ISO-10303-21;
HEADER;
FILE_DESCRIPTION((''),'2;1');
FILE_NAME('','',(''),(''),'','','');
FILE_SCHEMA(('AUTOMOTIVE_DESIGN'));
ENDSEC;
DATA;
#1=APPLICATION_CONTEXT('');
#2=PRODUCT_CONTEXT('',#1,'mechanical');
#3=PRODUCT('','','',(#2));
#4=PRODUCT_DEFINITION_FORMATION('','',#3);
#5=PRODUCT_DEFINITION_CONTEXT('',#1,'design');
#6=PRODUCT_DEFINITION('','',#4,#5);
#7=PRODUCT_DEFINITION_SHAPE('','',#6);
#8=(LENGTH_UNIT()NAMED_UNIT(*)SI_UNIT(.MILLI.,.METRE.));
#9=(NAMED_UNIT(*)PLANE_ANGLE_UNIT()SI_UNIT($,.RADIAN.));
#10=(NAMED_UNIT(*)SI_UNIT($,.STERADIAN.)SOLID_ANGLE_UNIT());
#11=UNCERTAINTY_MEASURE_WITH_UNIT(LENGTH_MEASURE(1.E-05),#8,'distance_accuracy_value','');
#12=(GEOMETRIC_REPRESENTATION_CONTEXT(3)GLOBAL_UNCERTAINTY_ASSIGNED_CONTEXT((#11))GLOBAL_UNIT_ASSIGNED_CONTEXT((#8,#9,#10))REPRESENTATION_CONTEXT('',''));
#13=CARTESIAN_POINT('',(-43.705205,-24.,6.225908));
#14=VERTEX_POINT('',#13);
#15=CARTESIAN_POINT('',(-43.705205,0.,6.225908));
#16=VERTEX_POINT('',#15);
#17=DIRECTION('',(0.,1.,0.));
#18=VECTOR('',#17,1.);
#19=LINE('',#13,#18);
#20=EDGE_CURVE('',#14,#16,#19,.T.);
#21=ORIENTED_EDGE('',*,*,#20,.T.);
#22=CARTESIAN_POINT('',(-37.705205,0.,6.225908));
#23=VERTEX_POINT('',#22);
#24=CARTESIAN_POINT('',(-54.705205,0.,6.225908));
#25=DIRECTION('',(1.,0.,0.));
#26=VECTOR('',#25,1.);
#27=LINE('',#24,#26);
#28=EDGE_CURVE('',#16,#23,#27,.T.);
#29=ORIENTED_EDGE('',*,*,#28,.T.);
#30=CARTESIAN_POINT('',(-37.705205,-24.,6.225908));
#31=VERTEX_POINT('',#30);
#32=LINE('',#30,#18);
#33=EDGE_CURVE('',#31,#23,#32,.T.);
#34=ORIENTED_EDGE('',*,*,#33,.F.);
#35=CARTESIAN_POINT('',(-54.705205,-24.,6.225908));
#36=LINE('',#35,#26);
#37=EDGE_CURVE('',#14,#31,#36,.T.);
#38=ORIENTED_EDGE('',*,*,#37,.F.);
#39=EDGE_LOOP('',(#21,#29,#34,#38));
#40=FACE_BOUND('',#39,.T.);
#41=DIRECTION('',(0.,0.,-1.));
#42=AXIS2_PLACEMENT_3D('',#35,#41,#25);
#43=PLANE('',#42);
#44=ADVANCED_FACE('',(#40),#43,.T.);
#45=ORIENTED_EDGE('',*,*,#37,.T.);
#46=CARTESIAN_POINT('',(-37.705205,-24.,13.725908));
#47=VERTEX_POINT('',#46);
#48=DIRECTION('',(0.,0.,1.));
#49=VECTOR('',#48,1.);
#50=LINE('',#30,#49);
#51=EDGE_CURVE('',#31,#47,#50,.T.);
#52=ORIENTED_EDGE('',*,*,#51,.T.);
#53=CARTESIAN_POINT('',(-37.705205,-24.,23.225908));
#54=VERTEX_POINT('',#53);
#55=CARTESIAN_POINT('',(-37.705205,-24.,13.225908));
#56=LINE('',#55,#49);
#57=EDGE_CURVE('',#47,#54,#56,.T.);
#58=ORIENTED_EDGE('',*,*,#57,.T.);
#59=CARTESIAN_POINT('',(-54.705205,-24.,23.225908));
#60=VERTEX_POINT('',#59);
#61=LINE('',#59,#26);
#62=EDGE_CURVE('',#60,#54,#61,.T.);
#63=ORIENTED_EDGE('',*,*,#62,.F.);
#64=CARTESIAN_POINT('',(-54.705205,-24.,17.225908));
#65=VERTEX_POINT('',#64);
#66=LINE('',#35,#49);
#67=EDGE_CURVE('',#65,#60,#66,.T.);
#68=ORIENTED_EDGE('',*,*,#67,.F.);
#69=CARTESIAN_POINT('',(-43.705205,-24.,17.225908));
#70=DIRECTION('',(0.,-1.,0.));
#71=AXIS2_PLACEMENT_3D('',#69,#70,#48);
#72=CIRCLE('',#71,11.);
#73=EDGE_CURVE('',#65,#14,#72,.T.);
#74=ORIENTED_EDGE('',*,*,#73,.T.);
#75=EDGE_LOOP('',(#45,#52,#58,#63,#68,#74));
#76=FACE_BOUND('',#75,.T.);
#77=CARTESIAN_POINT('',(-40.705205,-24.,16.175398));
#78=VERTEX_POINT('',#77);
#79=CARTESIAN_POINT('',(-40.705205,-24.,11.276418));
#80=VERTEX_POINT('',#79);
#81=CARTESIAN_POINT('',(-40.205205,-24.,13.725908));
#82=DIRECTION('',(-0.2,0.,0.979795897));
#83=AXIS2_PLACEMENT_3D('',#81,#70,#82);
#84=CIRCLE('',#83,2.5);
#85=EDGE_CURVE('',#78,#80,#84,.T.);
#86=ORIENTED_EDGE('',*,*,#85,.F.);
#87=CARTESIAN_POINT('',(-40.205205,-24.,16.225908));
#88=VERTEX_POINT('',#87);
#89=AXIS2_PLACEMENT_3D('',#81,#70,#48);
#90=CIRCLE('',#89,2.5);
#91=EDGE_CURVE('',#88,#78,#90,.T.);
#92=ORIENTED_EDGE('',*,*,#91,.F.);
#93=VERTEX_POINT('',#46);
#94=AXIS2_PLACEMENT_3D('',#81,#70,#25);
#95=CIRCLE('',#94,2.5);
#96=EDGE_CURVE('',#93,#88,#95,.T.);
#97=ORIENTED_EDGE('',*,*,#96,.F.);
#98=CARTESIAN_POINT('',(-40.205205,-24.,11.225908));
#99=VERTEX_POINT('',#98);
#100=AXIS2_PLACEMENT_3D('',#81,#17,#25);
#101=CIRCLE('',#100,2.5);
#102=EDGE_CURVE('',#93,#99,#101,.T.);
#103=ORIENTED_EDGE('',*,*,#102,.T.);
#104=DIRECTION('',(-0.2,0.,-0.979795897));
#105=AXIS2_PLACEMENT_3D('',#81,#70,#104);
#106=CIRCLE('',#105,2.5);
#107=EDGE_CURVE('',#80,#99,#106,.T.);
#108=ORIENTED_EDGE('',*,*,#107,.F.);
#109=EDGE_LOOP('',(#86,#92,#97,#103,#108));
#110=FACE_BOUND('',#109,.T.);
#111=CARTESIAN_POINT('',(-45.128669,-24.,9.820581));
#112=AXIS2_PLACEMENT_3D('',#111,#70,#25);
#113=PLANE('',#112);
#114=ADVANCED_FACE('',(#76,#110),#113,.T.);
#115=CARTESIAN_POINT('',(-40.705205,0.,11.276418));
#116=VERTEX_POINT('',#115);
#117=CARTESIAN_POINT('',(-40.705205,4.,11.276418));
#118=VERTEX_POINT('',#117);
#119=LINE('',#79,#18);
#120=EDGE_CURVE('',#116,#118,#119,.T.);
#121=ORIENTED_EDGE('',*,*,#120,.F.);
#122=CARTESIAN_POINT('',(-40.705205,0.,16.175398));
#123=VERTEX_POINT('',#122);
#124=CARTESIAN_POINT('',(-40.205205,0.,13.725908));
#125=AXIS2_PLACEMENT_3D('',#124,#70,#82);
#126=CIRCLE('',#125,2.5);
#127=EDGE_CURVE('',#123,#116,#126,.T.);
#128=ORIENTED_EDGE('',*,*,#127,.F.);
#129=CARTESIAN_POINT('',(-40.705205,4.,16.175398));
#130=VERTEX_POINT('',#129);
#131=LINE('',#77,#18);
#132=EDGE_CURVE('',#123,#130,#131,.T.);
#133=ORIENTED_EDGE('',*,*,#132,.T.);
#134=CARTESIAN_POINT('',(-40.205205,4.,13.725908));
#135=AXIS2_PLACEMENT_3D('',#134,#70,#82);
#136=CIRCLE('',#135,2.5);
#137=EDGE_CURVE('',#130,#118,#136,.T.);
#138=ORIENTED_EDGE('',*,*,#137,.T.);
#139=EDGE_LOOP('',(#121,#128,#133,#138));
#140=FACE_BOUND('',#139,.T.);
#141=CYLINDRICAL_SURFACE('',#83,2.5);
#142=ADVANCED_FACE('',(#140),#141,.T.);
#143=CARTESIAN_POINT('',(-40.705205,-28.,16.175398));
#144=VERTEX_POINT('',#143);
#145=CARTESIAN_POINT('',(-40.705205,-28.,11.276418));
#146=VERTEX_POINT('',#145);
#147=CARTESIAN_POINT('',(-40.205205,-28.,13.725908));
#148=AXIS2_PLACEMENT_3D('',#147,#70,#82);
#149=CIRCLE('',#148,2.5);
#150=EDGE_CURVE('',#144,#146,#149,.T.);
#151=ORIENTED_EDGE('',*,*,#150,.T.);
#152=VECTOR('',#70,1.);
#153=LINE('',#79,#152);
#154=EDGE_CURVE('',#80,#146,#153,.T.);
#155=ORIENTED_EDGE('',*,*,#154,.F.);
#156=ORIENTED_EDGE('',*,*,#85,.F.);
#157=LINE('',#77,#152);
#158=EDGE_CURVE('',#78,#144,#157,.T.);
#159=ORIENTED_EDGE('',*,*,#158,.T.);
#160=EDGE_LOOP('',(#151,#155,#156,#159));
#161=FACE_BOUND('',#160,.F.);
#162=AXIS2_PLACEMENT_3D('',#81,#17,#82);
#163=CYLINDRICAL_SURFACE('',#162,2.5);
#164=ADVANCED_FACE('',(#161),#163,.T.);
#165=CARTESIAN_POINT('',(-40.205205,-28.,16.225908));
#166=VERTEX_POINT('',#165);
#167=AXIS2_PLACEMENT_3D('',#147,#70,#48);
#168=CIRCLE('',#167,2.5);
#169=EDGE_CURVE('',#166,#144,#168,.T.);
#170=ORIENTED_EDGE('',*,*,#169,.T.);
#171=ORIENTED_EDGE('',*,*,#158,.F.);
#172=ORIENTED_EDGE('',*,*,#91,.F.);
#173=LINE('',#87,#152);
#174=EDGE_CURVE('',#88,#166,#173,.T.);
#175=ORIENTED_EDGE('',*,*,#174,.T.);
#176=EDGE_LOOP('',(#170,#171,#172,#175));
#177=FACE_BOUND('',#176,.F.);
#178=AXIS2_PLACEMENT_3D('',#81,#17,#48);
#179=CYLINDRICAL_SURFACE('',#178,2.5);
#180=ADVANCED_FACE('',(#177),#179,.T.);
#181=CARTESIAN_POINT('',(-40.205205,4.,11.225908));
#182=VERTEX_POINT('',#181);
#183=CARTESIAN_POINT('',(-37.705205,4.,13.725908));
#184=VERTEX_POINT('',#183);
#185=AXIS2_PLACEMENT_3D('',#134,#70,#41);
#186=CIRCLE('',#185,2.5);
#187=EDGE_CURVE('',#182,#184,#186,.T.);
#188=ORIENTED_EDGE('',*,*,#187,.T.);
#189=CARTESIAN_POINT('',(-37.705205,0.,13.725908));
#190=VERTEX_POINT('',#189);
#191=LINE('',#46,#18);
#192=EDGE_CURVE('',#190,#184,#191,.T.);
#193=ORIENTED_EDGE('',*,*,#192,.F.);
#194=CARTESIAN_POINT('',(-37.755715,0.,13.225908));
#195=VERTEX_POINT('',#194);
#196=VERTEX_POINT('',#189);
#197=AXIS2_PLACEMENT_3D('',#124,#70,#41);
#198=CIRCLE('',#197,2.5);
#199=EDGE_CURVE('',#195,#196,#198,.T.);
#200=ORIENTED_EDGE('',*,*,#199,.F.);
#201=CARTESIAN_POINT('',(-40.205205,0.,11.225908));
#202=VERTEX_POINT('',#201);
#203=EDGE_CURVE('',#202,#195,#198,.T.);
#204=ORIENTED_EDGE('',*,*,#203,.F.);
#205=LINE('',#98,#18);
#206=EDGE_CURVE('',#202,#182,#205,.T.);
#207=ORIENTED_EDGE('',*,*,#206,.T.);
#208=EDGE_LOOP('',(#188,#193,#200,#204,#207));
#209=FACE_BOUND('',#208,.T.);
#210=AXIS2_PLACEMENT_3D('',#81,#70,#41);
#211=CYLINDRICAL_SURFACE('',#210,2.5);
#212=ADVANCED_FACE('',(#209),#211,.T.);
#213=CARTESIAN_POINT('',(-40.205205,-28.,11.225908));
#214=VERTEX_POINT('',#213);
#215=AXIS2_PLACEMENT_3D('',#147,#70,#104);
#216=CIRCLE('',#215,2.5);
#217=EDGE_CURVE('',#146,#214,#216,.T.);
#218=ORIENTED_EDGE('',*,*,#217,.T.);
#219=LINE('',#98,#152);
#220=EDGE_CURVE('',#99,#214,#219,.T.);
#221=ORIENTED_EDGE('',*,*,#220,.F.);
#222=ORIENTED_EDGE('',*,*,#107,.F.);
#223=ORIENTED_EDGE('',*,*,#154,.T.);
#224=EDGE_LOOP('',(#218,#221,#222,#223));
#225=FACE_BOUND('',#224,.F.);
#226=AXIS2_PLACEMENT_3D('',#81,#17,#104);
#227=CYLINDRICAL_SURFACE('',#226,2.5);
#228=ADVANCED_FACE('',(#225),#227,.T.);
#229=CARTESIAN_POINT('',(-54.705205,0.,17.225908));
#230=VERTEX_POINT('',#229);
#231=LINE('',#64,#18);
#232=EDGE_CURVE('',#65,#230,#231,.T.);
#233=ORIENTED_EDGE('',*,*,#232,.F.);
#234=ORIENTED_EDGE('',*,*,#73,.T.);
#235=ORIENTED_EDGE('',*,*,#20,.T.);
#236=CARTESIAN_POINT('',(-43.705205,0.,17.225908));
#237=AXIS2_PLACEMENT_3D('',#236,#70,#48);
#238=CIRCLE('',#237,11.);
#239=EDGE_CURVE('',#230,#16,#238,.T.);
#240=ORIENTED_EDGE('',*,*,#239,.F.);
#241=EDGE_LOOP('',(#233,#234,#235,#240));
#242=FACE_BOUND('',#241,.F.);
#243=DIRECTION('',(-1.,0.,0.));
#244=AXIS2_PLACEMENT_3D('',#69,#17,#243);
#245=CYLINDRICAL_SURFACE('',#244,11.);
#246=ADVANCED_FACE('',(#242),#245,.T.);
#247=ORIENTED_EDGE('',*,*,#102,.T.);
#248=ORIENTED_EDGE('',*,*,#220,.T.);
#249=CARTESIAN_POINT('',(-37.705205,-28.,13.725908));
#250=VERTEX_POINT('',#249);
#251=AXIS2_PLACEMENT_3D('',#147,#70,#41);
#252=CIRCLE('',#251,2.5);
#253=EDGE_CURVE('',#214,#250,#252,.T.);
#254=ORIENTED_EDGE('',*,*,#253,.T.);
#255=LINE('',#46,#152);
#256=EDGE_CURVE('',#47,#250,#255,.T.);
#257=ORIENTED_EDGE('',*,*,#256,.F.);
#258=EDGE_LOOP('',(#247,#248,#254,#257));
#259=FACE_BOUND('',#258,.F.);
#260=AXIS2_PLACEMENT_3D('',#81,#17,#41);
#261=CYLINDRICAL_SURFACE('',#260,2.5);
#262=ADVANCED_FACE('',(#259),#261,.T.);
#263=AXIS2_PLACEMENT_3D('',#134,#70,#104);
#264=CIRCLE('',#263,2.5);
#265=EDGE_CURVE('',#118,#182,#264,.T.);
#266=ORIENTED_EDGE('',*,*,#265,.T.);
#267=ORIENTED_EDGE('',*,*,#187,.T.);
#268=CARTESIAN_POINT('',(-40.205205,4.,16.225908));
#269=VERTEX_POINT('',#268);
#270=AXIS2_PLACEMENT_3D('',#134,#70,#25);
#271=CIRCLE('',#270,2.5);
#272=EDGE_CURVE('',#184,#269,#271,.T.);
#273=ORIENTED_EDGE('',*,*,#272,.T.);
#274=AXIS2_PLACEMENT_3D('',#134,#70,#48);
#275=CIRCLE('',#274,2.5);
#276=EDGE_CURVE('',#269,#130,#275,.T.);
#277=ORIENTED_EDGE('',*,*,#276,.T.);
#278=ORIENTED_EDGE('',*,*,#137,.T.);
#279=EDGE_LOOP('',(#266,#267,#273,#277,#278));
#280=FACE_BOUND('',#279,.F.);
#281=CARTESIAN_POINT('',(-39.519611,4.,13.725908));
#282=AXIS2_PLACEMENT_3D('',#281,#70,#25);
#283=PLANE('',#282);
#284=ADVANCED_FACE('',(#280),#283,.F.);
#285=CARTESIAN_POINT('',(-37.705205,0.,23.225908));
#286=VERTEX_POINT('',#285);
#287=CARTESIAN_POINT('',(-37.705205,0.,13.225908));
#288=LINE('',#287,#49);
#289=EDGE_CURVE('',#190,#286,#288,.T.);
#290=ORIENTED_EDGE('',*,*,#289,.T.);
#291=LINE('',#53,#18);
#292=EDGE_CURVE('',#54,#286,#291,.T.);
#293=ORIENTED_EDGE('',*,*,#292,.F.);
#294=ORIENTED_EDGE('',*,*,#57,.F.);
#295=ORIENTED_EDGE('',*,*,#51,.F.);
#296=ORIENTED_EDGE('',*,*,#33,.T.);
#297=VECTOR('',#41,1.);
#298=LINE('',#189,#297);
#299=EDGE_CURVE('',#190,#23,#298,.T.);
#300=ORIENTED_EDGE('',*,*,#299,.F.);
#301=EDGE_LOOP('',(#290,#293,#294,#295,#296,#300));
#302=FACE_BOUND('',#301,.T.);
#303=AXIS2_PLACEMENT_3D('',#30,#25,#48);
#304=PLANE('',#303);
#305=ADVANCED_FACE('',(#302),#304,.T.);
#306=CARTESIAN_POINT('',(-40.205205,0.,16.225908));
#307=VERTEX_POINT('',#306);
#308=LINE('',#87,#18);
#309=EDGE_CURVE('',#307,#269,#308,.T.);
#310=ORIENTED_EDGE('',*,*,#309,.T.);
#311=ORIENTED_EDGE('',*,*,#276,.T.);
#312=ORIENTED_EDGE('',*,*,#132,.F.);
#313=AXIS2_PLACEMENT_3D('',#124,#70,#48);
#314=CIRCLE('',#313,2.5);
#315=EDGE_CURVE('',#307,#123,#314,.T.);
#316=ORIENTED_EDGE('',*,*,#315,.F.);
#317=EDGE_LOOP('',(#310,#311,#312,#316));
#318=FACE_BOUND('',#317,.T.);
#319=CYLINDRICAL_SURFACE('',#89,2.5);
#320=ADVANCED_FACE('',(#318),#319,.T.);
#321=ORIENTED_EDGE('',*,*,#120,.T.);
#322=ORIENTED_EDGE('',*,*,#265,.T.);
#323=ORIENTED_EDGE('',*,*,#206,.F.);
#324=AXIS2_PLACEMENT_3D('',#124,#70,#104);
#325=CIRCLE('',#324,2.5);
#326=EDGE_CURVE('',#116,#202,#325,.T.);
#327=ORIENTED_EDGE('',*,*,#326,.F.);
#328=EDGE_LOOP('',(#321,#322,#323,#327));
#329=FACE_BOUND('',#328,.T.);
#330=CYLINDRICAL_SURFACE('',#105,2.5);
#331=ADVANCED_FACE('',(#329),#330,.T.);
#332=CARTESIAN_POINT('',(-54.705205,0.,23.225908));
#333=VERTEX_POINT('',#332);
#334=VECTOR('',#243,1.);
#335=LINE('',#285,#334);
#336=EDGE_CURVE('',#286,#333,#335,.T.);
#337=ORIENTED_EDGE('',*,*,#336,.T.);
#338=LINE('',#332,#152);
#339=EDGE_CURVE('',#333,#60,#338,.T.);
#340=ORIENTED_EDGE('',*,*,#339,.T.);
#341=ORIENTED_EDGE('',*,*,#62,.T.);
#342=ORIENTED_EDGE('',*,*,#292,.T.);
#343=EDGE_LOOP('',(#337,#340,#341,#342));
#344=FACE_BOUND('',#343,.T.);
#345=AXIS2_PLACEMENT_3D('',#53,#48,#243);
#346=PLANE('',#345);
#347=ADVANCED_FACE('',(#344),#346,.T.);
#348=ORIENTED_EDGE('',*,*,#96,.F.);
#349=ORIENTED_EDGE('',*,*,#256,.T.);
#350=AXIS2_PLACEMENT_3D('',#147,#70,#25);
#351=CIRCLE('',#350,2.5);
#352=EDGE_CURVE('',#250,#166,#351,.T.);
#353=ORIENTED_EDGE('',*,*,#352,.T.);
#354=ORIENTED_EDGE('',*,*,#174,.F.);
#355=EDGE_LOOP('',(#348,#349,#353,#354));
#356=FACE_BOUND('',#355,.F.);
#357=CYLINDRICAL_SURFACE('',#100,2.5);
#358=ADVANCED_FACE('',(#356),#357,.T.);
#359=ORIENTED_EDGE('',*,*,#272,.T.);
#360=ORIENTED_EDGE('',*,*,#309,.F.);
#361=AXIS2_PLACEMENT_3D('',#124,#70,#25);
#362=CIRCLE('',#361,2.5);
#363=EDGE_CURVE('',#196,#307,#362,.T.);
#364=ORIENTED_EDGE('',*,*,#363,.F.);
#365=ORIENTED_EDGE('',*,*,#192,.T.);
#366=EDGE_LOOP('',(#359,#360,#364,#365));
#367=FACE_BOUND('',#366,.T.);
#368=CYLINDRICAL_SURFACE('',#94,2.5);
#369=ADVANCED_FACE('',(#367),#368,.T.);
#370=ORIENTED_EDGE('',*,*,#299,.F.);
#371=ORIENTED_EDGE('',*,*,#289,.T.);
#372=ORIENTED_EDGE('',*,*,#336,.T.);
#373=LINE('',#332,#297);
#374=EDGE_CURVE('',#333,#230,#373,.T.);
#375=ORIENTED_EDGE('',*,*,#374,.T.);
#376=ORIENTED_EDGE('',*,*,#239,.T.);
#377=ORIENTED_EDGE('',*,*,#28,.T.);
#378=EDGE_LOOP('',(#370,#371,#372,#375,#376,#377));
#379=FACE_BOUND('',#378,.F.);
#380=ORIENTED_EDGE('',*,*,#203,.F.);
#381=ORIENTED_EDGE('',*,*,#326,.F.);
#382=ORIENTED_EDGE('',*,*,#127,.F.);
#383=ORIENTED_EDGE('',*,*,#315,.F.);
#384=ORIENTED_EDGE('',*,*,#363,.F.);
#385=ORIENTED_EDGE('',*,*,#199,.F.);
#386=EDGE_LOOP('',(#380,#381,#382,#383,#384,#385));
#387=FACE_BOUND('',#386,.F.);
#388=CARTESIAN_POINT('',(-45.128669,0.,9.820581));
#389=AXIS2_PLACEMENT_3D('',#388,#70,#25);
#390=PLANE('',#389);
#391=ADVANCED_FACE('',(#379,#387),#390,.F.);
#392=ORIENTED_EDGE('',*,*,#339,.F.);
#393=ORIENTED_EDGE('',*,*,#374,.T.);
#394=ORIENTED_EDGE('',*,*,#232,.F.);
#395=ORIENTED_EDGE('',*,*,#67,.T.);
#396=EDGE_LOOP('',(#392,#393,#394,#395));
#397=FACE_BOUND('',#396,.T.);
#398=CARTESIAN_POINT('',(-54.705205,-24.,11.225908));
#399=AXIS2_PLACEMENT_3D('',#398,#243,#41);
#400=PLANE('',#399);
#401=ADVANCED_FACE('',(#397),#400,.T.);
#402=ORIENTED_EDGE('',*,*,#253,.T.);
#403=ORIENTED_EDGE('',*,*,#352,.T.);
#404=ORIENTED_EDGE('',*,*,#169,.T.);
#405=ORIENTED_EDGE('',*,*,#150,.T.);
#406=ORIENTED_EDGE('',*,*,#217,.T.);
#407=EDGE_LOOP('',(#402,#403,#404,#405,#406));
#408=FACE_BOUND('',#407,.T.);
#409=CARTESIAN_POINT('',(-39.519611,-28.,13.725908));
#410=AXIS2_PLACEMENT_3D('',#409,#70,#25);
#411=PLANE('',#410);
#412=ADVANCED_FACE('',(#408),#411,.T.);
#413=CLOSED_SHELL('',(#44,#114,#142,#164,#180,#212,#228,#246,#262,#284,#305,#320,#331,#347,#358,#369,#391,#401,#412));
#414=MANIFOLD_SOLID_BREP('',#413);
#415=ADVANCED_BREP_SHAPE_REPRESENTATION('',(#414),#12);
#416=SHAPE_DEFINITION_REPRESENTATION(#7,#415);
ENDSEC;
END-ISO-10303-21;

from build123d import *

# Parameters (mm, degrees)
F0_W     = 14
F0_H     = 12
F1_DEPTH = 24
F3_DEPTH = 28
F4_DEPTH = 4
F6_DEPTH = 24
F8_DEPTH = 24
F9_R     = 11


with BuildPart() as f1:
    # F0 (on Front) → F1 (new body)
    with BuildSketch(Plane.XZ):
        with Locations((-47.7052051574, 17.2259079414)):
            Rectangle(F0_W, F0_H)
    extrude(amount=F1_DEPTH)

    # F2 (on face) → F3 (join)
    with BuildSketch(Plane.XZ.offset(24)):
        with BuildLine():
            ThreePointArc((-40.7052051574, 11.2764181987), (-40.4564775624, 11.2385675589), (-40.2052051574, 11.2259079414))
            ThreePointArc((-40.2052051574, 11.2259079414), (-38.4374382044, 11.9581409885), (-37.7052051574, 13.7259079414))
            ThreePointArc((-37.7052051574, 13.7259079414), (-38.4374382044, 15.4936748944), (-40.2052051574, 16.2259079414))
            ThreePointArc((-40.2052051574, 16.2259079414), (-40.4564775624, 16.2132483239), (-40.7052051574, 16.1753976842))
            Line((-40.7052051574, 16.1753976842), (-40.7052051574, 11.2764181987))
        make_face()
        with BuildLine():
            ThreePointArc((-40.7052051574, 16.1753976842), (-42.7052051574, 13.7259079414), (-40.7052051574, 11.2764181987))
            Line((-40.7052051574, 11.2764181987), (-40.7052051574, 16.1753976842))
        make_face()
    extrude(amount=-F3_DEPTH)

    # F2 (on face) → F4 (join)
    with BuildSketch(Plane.XZ.offset(24)):
        with BuildLine():
            ThreePointArc((-40.7052051574, 11.2764181987), (-40.4564775624, 11.2385675589), (-40.2052051574, 11.2259079414))
            ThreePointArc((-40.2052051574, 11.2259079414), (-38.4374382044, 11.9581409885), (-37.7052051574, 13.7259079414))
            ThreePointArc((-37.7052051574, 13.7259079414), (-38.4374382044, 15.4936748944), (-40.2052051574, 16.2259079414))
            ThreePointArc((-40.2052051574, 16.2259079414), (-40.4564775624, 16.2132483239), (-40.7052051574, 16.1753976842))
            Line((-40.7052051574, 16.1753976842), (-40.7052051574, 11.2764181987))
        make_face()
        with BuildLine():
            ThreePointArc((-40.7052051574, 16.1753976842), (-42.7052051574, 13.7259079414), (-40.7052051574, 11.2764181987))
            Line((-40.7052051574, 11.2764181987), (-40.7052051574, 16.1753976842))
        make_face()
    extrude(amount=F4_DEPTH)

    # F5 (on face) → F6 (join)
    with BuildSketch(Plane.XZ.offset(24)):
        Polygon((-37.7052051574, 23.2259079414), (-40.7052051574, 23.2259079414), (-40.7052051574, 16.1753976842), (-40.7052051574, 13.2259079414), (-37.7052051574, 13.2259079414), align=None)
    extrude(amount=-F6_DEPTH)

    # F7 (on face) → F8 (join)
    with BuildSketch(Plane.XZ.offset(24)):
        with BuildLine():
            Line((-40.7052051574, 11.2259079414), (-54.7052051574, 11.2259079414))
            Line((-54.7052051574, 11.2259079414), (-54.7052051574, 6.2259079414))
            Line((-54.7052051574, 6.2259079414), (-37.7052051574, 6.2259079414))
            Line((-37.7052051574, 6.2259079414), (-37.7052051574, 13.2259079414))
            Line((-37.7052051574, 13.2259079414), (-37.7557154146, 13.2259079414))
            ThreePointArc((-37.7557154146, 13.2259079414), (-37.7178647749, 13.4746355364), (-37.7052051574, 13.7259079414))
            ThreePointArc((-37.7052051574, 13.7259079414), (-41.7863439875, 15.6623996145), (-40.7052051574, 11.2764181987))
            Line((-40.7052051574, 11.2764181987), (-40.7052051574, 11.2259079414))
        make_face()
    extrude(amount=-F8_DEPTH)

    # F9
    f9_edges = [f1.edges().sort_by_distance(p)[0] for p in [
        (-54.705205, -12, 6.225908),
    ]]
    fillet(f9_edges, radius=F9_R)


solid = f1.part
